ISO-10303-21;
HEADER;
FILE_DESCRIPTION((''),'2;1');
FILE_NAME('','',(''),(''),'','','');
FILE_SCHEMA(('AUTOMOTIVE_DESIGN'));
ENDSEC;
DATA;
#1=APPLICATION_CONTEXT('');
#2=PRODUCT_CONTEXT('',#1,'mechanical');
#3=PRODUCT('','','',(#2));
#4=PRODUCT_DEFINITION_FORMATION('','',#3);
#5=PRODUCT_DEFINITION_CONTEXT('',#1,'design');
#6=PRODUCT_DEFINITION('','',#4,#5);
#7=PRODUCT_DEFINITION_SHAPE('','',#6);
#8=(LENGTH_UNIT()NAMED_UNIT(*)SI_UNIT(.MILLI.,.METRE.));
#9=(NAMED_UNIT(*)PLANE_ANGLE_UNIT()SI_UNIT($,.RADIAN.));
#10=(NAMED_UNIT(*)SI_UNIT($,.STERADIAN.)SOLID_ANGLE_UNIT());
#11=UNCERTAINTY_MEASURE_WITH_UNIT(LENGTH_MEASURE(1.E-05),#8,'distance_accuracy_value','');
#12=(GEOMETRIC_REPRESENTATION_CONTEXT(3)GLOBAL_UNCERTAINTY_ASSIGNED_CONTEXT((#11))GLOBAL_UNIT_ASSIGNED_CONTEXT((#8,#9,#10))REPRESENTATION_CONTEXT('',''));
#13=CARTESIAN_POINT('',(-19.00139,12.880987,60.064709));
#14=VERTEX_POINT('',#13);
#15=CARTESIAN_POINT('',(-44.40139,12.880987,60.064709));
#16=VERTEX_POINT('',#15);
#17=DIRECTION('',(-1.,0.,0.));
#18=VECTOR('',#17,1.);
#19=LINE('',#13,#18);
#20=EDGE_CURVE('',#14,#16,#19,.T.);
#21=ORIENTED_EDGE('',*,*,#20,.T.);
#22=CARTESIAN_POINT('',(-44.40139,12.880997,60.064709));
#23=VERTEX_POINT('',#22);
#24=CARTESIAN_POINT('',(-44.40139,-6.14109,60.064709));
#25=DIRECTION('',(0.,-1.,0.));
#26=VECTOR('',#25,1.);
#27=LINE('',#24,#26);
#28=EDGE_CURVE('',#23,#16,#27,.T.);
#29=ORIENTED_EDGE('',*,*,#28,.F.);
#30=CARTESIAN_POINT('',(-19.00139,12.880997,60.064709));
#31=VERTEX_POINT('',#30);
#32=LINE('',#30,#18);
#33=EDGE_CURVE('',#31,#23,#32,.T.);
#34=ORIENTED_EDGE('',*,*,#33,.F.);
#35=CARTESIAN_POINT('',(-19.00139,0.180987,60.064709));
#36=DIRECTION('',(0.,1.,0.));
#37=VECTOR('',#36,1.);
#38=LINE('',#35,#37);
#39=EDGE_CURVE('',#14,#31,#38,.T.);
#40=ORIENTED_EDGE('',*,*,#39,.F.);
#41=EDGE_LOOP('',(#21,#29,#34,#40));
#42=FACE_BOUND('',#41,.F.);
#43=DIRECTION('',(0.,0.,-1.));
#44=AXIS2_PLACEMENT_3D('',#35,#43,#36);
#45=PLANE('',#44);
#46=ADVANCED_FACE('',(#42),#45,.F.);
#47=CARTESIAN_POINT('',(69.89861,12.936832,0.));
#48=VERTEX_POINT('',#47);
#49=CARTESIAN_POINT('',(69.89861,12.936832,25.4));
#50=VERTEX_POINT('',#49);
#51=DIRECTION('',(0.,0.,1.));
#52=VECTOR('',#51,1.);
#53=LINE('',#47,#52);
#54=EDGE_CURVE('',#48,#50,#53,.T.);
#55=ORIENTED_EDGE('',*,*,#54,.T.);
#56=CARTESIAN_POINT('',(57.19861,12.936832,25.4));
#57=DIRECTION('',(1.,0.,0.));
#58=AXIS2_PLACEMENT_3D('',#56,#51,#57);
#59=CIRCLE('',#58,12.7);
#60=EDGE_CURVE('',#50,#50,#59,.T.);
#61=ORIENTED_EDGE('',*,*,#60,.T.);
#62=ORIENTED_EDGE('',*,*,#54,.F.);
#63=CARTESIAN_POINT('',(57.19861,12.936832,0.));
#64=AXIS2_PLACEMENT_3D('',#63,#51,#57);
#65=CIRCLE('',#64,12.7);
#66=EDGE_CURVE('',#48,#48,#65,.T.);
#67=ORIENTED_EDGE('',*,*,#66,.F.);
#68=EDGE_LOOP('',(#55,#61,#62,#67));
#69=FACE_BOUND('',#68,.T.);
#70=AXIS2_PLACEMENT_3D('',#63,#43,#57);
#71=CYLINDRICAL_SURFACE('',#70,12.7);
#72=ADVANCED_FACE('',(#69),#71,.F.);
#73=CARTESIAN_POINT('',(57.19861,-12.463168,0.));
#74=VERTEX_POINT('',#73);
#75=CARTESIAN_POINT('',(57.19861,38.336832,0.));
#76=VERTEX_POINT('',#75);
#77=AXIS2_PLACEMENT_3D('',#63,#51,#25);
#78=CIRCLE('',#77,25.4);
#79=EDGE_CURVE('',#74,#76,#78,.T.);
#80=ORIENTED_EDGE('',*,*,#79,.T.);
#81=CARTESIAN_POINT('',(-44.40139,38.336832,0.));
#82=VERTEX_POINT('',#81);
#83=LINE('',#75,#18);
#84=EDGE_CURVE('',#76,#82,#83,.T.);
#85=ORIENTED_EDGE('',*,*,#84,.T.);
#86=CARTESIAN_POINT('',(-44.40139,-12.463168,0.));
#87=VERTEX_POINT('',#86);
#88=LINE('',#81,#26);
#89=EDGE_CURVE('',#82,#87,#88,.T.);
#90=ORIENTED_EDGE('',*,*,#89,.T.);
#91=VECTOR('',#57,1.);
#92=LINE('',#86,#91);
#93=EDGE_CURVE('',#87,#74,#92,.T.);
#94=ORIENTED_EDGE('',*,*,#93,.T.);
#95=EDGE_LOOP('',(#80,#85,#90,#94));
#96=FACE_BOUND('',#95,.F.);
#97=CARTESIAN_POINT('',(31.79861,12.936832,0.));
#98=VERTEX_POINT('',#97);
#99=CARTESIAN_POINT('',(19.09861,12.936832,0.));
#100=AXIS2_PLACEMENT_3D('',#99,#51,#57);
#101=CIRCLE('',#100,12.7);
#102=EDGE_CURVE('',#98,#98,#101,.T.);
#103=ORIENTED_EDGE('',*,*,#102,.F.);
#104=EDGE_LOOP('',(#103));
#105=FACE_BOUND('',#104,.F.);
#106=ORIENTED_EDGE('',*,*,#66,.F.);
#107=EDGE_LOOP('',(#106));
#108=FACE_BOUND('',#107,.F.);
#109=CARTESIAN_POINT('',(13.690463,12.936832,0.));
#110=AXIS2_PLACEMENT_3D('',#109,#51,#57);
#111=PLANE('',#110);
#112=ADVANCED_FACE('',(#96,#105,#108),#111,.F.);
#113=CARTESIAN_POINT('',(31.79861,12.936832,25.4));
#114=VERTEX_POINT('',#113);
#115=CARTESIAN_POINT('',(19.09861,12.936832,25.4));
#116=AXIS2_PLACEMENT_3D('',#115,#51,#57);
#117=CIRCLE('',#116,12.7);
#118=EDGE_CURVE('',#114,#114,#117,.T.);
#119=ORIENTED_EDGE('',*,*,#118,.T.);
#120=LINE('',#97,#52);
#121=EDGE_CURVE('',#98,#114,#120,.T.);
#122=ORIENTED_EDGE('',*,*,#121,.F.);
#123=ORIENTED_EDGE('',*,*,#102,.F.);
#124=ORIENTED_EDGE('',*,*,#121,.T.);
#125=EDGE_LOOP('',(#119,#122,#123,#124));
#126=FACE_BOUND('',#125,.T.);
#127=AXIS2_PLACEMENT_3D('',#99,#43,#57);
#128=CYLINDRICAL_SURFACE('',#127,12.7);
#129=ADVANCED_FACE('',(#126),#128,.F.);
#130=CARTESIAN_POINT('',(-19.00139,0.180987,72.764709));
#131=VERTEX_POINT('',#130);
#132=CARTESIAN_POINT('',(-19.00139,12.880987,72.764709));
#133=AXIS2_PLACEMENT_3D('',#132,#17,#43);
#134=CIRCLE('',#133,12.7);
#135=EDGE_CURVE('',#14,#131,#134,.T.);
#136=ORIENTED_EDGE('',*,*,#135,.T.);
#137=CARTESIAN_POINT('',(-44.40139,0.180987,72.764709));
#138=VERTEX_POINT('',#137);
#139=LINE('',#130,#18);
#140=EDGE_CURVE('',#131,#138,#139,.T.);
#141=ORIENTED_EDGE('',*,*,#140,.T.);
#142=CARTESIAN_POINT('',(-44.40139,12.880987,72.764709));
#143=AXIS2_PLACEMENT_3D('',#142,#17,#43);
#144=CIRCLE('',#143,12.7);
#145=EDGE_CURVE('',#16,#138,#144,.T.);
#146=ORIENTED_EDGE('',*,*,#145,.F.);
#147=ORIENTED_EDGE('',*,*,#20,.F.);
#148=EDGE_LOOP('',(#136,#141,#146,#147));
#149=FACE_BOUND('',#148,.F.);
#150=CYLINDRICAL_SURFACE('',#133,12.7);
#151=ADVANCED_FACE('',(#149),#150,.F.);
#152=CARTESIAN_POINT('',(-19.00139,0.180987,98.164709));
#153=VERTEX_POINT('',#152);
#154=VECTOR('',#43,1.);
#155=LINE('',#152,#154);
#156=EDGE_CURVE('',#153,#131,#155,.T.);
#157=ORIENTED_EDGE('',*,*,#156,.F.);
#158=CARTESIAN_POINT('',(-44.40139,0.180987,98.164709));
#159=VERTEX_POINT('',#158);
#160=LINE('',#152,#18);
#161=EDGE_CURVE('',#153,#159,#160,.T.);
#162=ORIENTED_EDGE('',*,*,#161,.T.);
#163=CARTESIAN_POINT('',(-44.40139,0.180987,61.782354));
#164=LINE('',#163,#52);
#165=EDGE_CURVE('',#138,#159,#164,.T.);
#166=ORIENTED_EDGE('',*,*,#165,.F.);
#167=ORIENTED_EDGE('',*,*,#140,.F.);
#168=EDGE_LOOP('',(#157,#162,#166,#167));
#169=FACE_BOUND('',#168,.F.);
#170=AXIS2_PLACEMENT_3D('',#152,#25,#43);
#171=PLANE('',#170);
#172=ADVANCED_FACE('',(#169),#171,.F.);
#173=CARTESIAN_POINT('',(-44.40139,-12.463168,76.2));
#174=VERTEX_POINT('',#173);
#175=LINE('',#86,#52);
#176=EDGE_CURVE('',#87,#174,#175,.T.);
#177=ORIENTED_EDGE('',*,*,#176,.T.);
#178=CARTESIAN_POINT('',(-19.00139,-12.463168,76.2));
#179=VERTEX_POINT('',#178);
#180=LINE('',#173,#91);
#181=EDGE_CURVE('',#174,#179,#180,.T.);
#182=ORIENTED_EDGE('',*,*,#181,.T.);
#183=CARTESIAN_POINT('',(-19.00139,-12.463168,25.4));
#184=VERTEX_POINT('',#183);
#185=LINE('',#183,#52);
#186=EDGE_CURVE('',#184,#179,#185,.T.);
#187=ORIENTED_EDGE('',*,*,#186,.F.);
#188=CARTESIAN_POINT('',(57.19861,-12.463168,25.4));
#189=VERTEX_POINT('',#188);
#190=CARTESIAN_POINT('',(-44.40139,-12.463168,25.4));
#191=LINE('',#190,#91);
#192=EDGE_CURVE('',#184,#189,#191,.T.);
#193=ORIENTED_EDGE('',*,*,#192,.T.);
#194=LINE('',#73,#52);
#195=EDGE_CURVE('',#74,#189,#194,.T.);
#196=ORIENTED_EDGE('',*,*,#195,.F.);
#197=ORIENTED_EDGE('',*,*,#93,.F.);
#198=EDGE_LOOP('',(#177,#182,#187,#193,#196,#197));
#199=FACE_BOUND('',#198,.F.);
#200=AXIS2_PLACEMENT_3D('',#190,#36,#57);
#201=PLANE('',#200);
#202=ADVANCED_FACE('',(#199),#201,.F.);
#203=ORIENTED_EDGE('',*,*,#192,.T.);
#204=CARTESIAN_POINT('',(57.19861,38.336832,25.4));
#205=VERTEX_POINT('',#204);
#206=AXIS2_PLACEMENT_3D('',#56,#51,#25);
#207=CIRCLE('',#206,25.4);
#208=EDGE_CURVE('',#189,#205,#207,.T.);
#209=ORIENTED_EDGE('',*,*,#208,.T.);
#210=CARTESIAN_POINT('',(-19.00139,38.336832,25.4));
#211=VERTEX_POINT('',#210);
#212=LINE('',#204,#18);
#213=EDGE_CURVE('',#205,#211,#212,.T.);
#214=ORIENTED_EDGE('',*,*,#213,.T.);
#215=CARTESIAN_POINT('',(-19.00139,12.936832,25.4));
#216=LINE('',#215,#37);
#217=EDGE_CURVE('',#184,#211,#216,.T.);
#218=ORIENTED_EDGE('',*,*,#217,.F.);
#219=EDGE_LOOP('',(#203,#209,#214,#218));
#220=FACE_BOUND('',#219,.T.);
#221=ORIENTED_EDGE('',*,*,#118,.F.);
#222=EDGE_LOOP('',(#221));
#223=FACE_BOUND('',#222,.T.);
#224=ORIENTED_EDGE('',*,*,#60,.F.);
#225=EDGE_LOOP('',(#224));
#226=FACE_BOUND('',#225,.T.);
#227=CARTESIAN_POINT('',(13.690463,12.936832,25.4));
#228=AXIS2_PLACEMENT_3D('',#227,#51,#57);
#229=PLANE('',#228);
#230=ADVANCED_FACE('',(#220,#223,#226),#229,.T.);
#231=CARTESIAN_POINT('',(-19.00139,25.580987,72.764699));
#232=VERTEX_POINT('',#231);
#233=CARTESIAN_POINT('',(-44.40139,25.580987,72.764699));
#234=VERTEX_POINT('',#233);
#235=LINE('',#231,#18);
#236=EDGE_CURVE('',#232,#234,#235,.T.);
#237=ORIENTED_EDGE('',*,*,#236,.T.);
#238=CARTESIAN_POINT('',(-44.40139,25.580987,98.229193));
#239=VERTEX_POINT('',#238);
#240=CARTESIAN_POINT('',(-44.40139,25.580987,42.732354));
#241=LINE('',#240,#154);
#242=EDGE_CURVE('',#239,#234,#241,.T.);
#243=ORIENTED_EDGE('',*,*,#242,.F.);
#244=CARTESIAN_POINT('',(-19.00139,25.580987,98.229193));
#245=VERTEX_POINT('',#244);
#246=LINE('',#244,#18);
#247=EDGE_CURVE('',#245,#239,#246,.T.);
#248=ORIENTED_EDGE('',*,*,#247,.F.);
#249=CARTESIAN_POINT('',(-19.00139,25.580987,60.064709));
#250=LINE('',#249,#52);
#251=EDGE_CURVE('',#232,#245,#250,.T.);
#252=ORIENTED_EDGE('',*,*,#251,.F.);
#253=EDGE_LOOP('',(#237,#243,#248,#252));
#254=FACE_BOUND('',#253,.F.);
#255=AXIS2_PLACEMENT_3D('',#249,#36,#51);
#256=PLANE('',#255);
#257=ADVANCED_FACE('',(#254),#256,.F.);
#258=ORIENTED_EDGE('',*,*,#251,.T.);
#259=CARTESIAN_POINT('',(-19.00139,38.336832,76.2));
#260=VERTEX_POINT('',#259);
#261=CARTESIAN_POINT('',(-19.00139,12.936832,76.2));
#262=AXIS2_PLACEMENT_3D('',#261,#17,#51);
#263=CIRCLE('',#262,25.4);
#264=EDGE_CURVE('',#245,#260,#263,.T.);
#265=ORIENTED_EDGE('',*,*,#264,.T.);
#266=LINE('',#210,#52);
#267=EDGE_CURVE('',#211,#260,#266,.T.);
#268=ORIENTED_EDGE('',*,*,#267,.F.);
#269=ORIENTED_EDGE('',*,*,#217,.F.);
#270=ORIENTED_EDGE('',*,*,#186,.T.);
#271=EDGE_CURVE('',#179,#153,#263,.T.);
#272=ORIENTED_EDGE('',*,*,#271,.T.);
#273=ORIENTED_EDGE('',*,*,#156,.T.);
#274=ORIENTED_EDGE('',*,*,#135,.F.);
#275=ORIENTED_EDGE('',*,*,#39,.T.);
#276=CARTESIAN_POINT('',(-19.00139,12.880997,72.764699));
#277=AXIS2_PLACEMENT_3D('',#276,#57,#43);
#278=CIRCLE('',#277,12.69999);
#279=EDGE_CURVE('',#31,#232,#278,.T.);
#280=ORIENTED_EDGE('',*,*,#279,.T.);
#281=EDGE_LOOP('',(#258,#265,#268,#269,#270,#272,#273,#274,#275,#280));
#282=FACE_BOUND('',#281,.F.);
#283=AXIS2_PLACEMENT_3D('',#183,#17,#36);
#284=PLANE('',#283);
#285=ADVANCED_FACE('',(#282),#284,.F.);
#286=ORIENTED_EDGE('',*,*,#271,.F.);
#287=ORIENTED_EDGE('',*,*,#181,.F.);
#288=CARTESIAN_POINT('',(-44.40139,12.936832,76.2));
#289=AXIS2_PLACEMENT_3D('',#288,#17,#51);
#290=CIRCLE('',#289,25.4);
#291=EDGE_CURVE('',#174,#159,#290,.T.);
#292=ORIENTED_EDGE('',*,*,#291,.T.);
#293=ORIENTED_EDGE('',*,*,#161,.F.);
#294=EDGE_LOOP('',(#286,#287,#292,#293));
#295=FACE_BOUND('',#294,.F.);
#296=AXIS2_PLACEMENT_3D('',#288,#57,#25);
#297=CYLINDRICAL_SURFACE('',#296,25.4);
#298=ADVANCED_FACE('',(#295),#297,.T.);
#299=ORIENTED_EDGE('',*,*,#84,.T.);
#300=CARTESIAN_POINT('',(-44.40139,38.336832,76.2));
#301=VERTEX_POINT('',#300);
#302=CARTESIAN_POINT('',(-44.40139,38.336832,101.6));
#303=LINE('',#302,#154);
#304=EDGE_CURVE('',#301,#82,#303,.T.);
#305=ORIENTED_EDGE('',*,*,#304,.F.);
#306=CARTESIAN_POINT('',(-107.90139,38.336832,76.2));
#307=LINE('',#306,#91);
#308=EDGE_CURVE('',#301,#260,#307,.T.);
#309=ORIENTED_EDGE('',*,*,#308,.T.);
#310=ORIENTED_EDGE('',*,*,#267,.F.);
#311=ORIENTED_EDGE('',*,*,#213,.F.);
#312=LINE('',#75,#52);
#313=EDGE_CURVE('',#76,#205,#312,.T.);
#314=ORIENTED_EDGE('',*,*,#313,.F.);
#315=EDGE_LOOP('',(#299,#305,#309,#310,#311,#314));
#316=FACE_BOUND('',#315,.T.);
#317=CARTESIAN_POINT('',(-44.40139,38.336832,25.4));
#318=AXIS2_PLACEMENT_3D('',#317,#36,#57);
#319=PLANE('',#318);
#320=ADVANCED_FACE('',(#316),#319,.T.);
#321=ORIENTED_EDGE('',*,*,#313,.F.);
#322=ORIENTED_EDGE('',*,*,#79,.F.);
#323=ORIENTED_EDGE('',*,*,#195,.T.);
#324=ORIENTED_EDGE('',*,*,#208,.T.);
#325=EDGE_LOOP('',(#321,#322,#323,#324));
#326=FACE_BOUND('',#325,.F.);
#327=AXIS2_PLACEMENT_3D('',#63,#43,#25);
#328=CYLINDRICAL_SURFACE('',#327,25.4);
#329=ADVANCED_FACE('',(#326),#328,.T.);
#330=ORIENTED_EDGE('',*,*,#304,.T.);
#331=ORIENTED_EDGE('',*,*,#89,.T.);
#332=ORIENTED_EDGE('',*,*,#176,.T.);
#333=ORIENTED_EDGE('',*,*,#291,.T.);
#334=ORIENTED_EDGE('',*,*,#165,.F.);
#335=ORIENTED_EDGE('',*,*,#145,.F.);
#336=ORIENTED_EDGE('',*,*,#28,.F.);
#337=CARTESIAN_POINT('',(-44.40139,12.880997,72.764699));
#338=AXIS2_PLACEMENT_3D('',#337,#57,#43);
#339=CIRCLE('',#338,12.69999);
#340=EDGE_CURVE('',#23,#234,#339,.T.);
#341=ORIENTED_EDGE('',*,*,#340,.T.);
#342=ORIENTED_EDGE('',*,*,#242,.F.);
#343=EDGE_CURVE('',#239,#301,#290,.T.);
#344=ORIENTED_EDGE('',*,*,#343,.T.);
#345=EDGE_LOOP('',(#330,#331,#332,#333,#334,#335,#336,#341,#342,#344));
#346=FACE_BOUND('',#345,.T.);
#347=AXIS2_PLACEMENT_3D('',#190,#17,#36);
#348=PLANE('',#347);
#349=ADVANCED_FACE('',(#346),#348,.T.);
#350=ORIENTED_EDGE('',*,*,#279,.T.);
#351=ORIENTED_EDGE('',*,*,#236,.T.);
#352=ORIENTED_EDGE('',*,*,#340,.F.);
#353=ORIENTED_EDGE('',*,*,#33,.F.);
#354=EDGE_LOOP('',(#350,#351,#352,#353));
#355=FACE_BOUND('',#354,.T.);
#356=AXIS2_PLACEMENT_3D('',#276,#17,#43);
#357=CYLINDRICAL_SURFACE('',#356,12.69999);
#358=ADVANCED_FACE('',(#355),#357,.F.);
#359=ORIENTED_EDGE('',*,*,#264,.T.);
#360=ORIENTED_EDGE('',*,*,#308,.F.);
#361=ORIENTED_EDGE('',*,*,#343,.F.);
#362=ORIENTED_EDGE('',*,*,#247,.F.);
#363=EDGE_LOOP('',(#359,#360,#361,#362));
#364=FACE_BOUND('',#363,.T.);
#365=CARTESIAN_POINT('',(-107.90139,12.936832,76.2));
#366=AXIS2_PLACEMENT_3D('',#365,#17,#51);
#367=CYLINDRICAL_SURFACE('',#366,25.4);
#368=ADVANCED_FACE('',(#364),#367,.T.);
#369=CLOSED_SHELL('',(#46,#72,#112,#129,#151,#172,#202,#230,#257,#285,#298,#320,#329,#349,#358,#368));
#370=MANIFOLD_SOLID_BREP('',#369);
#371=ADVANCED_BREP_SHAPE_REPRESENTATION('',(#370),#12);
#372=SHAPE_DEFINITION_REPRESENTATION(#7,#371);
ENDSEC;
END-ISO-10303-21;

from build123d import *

# Parameters (mm, degrees)
F0_R        = 12.7
F1_DEPTH    = 25.4
F2_W        = 25.4
F2_H        = 50.8
F3_DEPTH    = 76.2
F4_R        = 25.4
F5_T1_DEPTH = 152.4
F7_DEPTH    = 25.401
F8_R        = 12.7
F9_R        = 12.69999


# Not quite as in the source:
# - a fillet or chamfer that OpenCascade refuses, or shapes differently, is made with other operations: its cross-section is extruded or revolved along the edge and cut away or added
# - a fillet or chamfer is up to 0.001 mm smaller than in the source, because OpenCascade refuses the exact size


with BuildPart() as f1:
    # F0 (on Top) → F1 (new body)
    with BuildSketch(Plane.XY):
        with BuildLine():
            Line((57.198610294, 38.3368320964), (-44.401389706, 38.3368320964))
            Line((-44.401389706, 38.3368320964), (-44.401389706, -12.4631679036))
            Line((-44.401389706, -12.4631679036), (57.198610294, -12.4631679036))
            ThreePointArc((57.198610294, -12.4631679036), (82.598610294, 12.9368320964), (57.198610294, 38.3368320964))
        make_face()
        with Locations((19.098610294, 12.9368320964)):
            Circle(F0_R, mode=Mode.SUBTRACT)
        with Locations((57.198610294, 12.9368320964)):
            Circle(F0_R, mode=Mode.SUBTRACT)
    extrude(amount=F1_DEPTH)

    # F2 (on face) → F3 (join)
    with BuildSketch(Plane.XY.offset(25.4)):
        with Locations((-31.701389706, 12.9368320964)):
            Rectangle(F2_W, F2_H)
    extrude(amount=F3_DEPTH)

    # F4
    f4_edges = [f1.edges().sort_by_distance(p)[0] for p in [
        (-31.70139, -12.463168, 101.6),
    ]]
    fillet(f4_edges, radius=F4_R)

    # F5: fillet of radius 25.4 on 1 edges, made by hand

    # F5_s2 → F5_t1 (cut)
    with BuildSketch(Plane.YZ.offset(-107.901389706)):
        with BuildLine():
            ThreePointArc((12.9368320964, 101.6), (30.8973443386, 94.1605122421), (38.3368320964, 76.2))
            Line((38.3368320964, 76.2), (38.3368320964, 101.6))
            Line((38.3368320964, 101.6), (12.9368320964, 101.6))
        make_face()
    extrude(amount=F5_T1_DEPTH, mode=Mode.SUBTRACT)

    # F6 (on face) → F7 (cut, through all)
    with BuildSketch(Plane.YZ.offset(-19.001389706)):
        with BuildLine():
            ThreePointArc((12.9368320964, 101.6), (6.3316674028, 100.7261452204), (0.1809873343, 98.1647086118))
            Line((0.1809873343, 98.1647086118), (0.1809873343, 60.0647086118))
            Line((0.1809873343, 60.0647086118), (25.5809873343, 60.0647086118))
            Line((25.5809873343, 60.0647086118), (25.5809873343, 98.2291928659))
            ThreePointArc((25.5809873343, 98.2291928659), (19.4797099497, 100.742834991), (12.9368320964, 101.6))
        make_face()
    extrude(amount=-F7_DEPTH, mode=Mode.SUBTRACT)

    # F8
    f8_edges = [f1.edges().sort_by_distance(p)[0] for p in [
        (-31.70139, 0.180987, 60.064709),
    ]]
    fillet(f8_edges, radius=F8_R)

    # F9 (radius 12.7 in the source; OpenCascade refuses exactly that, so slightly less here)
    f9_edges = [f1.edges().sort_by_distance(p)[0] for p in [
        (-31.70139, 25.580987, 60.064709),
    ]]
    fillet(f9_edges, radius=F9_R)


solid = f1.part
